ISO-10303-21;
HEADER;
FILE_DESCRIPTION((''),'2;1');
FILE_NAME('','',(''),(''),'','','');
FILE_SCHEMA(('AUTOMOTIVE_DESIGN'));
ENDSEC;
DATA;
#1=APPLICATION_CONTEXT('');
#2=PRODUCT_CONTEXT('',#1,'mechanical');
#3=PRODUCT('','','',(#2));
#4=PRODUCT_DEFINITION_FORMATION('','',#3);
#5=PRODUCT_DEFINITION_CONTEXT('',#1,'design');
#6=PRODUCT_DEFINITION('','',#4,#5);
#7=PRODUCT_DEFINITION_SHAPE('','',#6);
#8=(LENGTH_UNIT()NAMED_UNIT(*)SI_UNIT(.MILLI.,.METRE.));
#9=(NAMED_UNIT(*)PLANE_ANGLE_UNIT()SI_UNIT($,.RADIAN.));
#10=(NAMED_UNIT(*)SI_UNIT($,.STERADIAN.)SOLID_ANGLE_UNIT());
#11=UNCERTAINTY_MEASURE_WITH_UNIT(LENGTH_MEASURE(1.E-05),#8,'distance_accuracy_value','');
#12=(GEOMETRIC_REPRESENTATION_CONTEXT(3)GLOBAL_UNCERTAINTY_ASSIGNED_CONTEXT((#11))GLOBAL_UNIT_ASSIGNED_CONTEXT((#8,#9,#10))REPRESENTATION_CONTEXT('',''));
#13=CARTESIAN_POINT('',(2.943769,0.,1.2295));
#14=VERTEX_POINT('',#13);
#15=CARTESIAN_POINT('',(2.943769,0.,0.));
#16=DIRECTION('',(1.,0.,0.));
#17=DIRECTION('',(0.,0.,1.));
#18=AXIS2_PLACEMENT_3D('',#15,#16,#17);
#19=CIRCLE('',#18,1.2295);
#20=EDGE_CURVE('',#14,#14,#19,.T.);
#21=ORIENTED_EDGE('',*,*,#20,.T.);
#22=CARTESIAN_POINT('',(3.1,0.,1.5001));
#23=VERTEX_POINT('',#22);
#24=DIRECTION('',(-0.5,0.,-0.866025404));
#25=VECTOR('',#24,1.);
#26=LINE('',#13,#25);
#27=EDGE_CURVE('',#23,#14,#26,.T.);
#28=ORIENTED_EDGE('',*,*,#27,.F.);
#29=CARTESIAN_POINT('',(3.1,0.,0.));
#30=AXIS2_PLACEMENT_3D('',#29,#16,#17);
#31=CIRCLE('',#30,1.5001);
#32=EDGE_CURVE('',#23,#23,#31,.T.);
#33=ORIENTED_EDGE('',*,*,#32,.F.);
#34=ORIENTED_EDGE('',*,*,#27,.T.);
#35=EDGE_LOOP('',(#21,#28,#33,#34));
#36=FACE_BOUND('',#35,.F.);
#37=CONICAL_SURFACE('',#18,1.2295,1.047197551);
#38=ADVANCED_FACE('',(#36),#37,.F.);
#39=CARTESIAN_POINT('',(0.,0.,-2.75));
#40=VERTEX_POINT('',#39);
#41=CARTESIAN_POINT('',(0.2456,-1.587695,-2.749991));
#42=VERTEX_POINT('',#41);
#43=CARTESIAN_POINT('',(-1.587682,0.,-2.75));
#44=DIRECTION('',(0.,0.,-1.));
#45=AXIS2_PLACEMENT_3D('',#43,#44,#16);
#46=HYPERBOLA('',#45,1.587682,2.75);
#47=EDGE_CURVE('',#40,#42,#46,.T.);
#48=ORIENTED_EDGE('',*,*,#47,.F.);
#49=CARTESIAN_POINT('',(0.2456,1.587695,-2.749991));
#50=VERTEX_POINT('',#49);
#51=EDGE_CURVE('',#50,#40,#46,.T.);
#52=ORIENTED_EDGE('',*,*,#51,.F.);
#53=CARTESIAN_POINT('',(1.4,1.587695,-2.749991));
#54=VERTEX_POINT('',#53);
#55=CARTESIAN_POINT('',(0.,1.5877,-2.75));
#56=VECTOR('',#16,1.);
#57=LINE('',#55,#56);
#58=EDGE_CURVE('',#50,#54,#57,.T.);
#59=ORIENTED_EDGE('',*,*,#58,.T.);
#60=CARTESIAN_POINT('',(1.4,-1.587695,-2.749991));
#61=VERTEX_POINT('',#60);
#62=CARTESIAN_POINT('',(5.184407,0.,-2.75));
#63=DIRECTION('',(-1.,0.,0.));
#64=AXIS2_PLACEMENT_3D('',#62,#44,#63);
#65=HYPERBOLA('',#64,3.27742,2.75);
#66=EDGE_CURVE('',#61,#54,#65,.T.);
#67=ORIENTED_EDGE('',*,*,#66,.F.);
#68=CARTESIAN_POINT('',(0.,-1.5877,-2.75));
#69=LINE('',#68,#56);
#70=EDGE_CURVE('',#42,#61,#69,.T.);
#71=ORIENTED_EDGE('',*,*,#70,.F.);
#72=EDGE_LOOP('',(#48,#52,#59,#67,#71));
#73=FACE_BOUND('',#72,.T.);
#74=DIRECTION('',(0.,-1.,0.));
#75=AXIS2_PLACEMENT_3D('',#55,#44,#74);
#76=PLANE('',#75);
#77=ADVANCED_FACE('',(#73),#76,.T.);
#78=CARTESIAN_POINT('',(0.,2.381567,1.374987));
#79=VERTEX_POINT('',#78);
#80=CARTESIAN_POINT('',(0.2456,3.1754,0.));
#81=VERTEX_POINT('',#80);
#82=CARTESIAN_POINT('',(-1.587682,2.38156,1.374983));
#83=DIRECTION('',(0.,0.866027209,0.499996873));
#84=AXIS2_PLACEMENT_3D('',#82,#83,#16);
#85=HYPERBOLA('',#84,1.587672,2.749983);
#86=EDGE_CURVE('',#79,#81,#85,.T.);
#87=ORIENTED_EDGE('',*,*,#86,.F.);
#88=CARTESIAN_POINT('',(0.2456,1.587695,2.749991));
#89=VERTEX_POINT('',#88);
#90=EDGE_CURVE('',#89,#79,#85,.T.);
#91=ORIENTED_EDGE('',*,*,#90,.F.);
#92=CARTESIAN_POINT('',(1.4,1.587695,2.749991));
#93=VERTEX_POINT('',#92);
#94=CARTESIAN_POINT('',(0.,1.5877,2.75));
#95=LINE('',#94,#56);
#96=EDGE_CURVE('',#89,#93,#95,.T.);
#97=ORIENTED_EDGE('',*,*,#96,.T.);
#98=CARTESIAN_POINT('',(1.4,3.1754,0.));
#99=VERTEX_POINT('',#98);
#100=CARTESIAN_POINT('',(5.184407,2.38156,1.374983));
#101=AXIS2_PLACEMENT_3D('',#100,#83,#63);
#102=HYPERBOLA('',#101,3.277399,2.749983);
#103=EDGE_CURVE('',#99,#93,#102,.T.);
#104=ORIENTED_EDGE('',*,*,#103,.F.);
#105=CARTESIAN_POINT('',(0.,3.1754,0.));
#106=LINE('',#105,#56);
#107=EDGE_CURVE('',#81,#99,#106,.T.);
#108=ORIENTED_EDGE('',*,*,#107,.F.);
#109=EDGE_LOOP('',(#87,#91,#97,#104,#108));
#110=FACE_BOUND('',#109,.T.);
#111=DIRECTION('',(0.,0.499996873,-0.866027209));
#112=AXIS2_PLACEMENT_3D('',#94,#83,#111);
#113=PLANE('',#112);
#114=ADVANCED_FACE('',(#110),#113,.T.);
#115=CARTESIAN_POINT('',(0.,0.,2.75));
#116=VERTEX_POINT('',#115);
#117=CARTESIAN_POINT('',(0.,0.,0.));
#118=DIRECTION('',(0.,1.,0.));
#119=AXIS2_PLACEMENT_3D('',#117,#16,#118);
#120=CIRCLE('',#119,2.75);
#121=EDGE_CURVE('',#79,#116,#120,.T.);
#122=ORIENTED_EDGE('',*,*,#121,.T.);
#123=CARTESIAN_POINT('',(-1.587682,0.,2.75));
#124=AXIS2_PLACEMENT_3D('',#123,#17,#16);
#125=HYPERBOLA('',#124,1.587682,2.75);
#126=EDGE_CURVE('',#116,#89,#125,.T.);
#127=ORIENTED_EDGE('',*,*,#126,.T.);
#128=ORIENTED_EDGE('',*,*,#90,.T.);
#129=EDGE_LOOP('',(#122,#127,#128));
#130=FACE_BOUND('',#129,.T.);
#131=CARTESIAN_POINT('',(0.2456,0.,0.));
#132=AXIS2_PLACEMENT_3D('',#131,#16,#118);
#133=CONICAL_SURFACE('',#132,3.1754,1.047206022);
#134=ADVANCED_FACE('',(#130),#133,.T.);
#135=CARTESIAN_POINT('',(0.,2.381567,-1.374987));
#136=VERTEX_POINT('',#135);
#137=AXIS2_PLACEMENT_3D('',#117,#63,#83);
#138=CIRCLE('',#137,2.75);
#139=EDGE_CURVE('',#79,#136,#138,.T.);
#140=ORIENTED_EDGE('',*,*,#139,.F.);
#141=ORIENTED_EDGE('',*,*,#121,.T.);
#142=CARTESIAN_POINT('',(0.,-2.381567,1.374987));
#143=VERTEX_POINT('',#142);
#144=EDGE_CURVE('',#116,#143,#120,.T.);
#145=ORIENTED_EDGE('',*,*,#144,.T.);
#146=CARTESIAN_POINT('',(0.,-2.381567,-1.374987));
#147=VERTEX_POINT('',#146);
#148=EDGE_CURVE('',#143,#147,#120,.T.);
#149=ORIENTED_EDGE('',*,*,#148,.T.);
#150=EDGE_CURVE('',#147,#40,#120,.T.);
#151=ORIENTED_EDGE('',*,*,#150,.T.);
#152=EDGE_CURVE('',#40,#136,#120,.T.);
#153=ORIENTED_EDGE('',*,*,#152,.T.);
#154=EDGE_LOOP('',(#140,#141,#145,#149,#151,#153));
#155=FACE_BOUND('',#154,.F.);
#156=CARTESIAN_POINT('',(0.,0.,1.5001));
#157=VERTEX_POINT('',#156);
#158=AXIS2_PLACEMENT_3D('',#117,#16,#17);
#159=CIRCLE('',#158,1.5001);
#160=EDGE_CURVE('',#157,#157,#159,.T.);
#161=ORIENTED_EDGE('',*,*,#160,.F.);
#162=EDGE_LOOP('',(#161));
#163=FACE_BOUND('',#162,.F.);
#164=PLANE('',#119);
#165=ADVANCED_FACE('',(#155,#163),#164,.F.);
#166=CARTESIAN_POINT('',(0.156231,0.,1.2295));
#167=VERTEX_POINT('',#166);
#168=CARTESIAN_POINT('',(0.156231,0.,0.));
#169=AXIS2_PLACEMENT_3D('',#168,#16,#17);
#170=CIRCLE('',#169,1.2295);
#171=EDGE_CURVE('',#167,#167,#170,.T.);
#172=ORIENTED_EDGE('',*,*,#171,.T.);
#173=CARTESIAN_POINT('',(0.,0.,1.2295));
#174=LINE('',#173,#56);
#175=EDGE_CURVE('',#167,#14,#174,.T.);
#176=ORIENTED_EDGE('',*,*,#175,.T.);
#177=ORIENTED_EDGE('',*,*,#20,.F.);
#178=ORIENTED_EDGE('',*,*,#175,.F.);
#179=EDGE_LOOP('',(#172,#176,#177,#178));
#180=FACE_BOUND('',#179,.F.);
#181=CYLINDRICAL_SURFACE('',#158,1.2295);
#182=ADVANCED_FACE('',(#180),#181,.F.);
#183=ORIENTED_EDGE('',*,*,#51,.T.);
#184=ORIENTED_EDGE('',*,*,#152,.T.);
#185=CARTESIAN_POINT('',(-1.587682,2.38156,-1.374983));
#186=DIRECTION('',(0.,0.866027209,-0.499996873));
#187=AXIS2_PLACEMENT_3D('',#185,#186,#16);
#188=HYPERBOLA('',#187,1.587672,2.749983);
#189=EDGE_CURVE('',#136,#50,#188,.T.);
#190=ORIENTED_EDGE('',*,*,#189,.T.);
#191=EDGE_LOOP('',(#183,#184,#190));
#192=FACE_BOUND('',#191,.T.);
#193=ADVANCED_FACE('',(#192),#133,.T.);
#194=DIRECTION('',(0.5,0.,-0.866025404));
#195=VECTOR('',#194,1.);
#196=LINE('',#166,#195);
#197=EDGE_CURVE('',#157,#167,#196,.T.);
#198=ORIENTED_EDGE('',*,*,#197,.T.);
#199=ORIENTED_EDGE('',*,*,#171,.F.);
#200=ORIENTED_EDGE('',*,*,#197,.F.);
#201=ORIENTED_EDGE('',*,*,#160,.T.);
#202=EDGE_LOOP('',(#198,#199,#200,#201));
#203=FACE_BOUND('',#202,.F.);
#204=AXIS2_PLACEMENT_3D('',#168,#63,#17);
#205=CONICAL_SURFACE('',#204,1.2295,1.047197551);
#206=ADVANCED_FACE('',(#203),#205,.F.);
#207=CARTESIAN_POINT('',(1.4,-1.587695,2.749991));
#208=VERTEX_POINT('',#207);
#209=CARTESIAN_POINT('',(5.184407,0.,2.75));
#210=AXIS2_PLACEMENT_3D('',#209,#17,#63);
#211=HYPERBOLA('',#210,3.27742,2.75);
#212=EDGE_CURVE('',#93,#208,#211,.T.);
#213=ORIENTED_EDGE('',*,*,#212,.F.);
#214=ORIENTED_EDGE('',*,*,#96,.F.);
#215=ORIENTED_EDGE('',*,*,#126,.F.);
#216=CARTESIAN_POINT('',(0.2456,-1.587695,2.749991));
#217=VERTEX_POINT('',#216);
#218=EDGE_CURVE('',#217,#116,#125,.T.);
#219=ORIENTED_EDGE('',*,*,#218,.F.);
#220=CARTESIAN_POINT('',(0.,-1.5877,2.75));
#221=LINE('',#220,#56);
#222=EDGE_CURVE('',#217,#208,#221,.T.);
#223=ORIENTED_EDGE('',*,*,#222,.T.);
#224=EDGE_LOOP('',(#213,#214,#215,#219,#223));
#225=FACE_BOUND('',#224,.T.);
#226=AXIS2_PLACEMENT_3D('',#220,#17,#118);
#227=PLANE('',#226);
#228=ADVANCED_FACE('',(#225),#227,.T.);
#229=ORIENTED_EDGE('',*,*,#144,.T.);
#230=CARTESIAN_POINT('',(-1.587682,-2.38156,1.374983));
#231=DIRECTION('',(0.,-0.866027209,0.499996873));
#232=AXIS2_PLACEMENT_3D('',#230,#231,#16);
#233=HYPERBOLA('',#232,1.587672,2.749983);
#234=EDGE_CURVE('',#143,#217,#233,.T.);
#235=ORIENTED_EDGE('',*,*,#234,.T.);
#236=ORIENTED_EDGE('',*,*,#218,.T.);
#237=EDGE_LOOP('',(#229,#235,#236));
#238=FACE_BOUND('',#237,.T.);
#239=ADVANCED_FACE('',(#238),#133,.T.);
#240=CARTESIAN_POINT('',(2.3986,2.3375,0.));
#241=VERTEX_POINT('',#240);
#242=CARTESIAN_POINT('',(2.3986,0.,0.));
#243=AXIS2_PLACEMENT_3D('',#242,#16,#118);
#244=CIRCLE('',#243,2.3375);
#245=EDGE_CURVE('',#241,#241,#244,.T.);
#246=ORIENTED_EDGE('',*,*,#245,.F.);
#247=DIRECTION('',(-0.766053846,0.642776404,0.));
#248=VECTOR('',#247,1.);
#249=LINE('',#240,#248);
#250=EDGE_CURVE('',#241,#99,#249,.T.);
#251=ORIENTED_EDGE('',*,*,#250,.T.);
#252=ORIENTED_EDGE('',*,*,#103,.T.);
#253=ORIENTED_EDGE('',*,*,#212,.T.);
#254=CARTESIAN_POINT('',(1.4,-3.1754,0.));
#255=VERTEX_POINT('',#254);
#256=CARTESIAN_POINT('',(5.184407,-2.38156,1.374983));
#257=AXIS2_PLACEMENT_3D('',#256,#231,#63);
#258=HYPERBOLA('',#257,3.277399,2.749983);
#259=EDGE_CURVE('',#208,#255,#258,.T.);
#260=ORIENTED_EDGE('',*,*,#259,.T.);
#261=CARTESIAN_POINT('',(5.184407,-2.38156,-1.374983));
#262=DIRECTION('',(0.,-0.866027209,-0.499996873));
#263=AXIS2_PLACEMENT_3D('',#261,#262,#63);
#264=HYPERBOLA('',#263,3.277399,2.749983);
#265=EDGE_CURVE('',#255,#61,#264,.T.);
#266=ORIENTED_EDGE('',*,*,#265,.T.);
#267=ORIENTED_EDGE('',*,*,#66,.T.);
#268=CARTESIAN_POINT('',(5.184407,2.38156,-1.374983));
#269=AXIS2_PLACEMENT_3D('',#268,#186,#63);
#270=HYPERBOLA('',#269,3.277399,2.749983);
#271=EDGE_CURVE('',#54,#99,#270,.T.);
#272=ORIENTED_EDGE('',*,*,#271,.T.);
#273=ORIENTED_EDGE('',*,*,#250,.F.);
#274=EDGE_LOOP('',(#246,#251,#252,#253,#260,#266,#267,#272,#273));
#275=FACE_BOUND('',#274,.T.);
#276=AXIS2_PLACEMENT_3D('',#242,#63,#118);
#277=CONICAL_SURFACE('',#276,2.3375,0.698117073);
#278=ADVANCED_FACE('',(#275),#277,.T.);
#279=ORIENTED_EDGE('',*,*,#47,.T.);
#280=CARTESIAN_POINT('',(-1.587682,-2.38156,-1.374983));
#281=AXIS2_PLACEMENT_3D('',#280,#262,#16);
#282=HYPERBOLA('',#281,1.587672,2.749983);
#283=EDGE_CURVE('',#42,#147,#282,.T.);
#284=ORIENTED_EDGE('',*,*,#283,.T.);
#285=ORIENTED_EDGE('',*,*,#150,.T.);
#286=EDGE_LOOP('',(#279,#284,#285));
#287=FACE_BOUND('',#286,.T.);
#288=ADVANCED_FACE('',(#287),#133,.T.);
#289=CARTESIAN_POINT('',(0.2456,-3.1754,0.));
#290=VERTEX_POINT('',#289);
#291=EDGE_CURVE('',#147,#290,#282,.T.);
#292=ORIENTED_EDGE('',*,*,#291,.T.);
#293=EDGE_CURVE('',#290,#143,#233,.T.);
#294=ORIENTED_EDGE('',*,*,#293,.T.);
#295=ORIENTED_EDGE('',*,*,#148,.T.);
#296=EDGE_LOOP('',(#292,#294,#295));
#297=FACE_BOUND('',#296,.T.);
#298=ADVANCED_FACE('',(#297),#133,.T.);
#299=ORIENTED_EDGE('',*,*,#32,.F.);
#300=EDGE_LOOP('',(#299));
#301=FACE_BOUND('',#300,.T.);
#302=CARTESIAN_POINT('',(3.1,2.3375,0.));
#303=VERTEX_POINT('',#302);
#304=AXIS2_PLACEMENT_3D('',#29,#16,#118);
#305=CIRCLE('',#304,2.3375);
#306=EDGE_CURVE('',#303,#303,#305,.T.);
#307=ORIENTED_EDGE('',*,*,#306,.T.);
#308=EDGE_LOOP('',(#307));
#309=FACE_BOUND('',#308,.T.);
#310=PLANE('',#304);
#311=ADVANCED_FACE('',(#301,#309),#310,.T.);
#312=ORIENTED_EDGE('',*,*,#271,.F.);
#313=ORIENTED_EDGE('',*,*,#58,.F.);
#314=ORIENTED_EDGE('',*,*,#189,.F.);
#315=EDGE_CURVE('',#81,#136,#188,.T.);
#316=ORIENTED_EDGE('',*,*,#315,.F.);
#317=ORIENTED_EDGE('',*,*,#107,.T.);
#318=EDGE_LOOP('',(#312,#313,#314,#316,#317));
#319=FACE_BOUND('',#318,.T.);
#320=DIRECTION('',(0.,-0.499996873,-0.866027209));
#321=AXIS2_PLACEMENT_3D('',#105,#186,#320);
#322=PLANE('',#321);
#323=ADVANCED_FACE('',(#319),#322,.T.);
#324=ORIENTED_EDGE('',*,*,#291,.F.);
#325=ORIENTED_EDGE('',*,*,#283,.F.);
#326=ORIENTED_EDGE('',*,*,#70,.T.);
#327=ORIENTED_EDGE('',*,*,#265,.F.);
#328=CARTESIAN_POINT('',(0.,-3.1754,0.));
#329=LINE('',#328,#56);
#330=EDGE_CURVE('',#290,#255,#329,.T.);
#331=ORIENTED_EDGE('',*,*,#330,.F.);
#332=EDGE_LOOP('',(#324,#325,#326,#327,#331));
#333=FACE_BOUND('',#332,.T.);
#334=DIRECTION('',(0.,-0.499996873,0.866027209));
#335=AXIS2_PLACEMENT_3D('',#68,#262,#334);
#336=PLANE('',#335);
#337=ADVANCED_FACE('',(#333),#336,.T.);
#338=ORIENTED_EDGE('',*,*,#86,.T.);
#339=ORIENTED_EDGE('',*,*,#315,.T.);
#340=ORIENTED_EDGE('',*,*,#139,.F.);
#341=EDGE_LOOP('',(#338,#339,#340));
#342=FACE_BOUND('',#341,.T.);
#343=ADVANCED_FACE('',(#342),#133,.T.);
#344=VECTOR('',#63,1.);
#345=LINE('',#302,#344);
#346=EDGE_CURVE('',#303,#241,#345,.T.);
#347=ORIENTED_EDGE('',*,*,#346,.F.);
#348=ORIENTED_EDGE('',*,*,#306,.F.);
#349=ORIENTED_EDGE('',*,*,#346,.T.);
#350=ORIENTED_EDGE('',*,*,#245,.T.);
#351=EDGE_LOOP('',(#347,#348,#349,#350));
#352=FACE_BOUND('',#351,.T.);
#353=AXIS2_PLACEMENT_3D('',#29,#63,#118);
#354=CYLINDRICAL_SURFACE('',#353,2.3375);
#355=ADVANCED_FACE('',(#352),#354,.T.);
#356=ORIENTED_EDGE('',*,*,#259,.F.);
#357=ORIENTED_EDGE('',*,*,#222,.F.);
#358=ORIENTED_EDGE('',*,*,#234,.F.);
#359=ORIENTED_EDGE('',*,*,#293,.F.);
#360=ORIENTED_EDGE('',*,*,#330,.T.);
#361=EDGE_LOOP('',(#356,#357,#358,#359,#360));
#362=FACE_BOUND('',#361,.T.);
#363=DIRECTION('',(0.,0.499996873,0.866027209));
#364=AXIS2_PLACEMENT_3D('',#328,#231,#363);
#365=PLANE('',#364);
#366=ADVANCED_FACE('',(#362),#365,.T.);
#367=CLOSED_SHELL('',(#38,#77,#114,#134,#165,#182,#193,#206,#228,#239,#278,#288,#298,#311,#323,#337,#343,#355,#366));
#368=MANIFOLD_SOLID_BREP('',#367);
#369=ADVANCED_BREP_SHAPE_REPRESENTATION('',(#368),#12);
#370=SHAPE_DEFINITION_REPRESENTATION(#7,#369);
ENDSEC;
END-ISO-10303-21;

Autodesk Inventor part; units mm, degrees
ref_plane "YZ Plane" through (0, 0, 0) normal (1, 0, 0) x (0, 1, 0)
ref_plane "XZ Plane" through (0, 0, 0) normal (0, 1, 0) x (-1, 0, 0)
sketch "Sketch1" plane through (0, 0, 0) normal (1, 0, 0) x (0, 1, 0)
  line L0 (-3.1754, 0) -> (-1.5877, 2.75)
  line L1 (-1.5877, 2.75) -> (1.5877, 2.75)
  line L2 (1.5877, 2.75) -> (3.1754, 0)
  line L3 (3.1754, 0) -> (1.5877, -2.75)
  line L4 (1.5877, -2.75) -> (-1.5877, -2.75)
  line L5 (-1.5877, -2.75) -> (-3.1754, 0)
  point P0 (0, 0)
  point P1 (0, 0)
  dimension "d0" = 6.3509
extrude "Body" add sketch "Sketch1" along normal blind 3.1
sketch "Sketch2" plane through (0, 0, 0) normal (-1, 0, 0) x (0, 0, 1)
  line L0 (0, -4.4456) -> (0, 4.4456) projected
  line L1 (-3.85, 0) -> (3.85, 0) projected
  point P0 (0, 0)
hole "Thread" at (0, 0, 0) direction (1, 0, 0) diameter 2.459 end through all thread size "M3x0.5" class "6H" standard "ANSI Metric M Profile"
chamfer "Chamfer1" distance 0.2706 angle 30 1 edges at (0, 0, -1.2295) measured on face at (0, -1.925, -1.1495)
chamfer "Chamfer2" distance 0.2706 angle 30 1 edges at (3.1, 0, -1.2295) measured on face at (3.1, -1.925, -1.1495)
sketch "Sketch3" plane through (0, 0, 0) normal (0, 0, 1) x (1, 0, 0)
  line L0 (0, 1.5877) -> (0, 3.1754) projected
  line L1 (0, 3.1754) -> (3.1, 3.1754) projected
  line L2 (3.1, 1.5877) -> (3.1, 3.1754) projected
  line L3 (-0.62, 0) -> (3.72, 0) projected
  line L4 (0.2456, 3.1754) -> (0, 2.75)
  line L5 (3.1, 2.3375) -> (2.3986, 2.3375)
  line L6 (2.3986, 2.3375) -> (1.4, 3.1754)
  dimension "d3" = 30
  dimension "d5" = 5.5
  dimension "d6" = 4.675
  dimension "d8" = 50
  dimension "d9" = 1.4
revolve "Chamfer3" cut sketch "Sketch3" angle 360 about axis through (-10, 0, 0) along (1, 0, 0)
ref_plane "Work Plane1" through (8.9551, 0, 0) normal (0, 0, 1) x (-1, 0, 0)
equation "\"d0\" = 1.1547 * SW"
equation "\"d1\" = KOH"
equation "\"d3\" = ANG1"
equation "\"d5\" = SW0"
equation "\"d6\" = SW1"
equation "\"d8\" = ANG2"
equation "\"d9\" = KOH1"
equation "\"d10\" = -0.5 * GD1 + 0.5 * NND"
equation "\"d39\" = -0.5 * GD1 + 0.5 * NND"
equation "\"d12\" = -0.5 * GD1 + 0.5 * NND"
equation "\"d40\" = -0.5 * GD1 + 0.5 * NND"
equation "\"ANG1\" = 30deg"
equation "\"ANG2\" = 50deg"
equation "\"NND\" = 3"
equation "\"KOH\" = 3.1"
equation "\"SW\" = 5.5"
equation "\"SW0\" = SW"
equation "\"SW1\" = 0.85 * SW"
equation "\"KOH1\" = 1.4"
equation "\"GUL\" = 0.541266 * PTC"
equation "\"THREADDIA\" = 3"
equation "\"TOA\" = 30deg"
equation "\"PTC\" = 0.5"
equation "\"E0\" = 1.155 * SW"
equation "\"GAL\" = 0.541266 * PTC"
equation "\"GD1\" = 2.458734"
properties part number "ANSI B18.16.3M - Property Class 5 and 10 - Metric M3 x 0.5 Metal Type" material "Steel, Mild"
